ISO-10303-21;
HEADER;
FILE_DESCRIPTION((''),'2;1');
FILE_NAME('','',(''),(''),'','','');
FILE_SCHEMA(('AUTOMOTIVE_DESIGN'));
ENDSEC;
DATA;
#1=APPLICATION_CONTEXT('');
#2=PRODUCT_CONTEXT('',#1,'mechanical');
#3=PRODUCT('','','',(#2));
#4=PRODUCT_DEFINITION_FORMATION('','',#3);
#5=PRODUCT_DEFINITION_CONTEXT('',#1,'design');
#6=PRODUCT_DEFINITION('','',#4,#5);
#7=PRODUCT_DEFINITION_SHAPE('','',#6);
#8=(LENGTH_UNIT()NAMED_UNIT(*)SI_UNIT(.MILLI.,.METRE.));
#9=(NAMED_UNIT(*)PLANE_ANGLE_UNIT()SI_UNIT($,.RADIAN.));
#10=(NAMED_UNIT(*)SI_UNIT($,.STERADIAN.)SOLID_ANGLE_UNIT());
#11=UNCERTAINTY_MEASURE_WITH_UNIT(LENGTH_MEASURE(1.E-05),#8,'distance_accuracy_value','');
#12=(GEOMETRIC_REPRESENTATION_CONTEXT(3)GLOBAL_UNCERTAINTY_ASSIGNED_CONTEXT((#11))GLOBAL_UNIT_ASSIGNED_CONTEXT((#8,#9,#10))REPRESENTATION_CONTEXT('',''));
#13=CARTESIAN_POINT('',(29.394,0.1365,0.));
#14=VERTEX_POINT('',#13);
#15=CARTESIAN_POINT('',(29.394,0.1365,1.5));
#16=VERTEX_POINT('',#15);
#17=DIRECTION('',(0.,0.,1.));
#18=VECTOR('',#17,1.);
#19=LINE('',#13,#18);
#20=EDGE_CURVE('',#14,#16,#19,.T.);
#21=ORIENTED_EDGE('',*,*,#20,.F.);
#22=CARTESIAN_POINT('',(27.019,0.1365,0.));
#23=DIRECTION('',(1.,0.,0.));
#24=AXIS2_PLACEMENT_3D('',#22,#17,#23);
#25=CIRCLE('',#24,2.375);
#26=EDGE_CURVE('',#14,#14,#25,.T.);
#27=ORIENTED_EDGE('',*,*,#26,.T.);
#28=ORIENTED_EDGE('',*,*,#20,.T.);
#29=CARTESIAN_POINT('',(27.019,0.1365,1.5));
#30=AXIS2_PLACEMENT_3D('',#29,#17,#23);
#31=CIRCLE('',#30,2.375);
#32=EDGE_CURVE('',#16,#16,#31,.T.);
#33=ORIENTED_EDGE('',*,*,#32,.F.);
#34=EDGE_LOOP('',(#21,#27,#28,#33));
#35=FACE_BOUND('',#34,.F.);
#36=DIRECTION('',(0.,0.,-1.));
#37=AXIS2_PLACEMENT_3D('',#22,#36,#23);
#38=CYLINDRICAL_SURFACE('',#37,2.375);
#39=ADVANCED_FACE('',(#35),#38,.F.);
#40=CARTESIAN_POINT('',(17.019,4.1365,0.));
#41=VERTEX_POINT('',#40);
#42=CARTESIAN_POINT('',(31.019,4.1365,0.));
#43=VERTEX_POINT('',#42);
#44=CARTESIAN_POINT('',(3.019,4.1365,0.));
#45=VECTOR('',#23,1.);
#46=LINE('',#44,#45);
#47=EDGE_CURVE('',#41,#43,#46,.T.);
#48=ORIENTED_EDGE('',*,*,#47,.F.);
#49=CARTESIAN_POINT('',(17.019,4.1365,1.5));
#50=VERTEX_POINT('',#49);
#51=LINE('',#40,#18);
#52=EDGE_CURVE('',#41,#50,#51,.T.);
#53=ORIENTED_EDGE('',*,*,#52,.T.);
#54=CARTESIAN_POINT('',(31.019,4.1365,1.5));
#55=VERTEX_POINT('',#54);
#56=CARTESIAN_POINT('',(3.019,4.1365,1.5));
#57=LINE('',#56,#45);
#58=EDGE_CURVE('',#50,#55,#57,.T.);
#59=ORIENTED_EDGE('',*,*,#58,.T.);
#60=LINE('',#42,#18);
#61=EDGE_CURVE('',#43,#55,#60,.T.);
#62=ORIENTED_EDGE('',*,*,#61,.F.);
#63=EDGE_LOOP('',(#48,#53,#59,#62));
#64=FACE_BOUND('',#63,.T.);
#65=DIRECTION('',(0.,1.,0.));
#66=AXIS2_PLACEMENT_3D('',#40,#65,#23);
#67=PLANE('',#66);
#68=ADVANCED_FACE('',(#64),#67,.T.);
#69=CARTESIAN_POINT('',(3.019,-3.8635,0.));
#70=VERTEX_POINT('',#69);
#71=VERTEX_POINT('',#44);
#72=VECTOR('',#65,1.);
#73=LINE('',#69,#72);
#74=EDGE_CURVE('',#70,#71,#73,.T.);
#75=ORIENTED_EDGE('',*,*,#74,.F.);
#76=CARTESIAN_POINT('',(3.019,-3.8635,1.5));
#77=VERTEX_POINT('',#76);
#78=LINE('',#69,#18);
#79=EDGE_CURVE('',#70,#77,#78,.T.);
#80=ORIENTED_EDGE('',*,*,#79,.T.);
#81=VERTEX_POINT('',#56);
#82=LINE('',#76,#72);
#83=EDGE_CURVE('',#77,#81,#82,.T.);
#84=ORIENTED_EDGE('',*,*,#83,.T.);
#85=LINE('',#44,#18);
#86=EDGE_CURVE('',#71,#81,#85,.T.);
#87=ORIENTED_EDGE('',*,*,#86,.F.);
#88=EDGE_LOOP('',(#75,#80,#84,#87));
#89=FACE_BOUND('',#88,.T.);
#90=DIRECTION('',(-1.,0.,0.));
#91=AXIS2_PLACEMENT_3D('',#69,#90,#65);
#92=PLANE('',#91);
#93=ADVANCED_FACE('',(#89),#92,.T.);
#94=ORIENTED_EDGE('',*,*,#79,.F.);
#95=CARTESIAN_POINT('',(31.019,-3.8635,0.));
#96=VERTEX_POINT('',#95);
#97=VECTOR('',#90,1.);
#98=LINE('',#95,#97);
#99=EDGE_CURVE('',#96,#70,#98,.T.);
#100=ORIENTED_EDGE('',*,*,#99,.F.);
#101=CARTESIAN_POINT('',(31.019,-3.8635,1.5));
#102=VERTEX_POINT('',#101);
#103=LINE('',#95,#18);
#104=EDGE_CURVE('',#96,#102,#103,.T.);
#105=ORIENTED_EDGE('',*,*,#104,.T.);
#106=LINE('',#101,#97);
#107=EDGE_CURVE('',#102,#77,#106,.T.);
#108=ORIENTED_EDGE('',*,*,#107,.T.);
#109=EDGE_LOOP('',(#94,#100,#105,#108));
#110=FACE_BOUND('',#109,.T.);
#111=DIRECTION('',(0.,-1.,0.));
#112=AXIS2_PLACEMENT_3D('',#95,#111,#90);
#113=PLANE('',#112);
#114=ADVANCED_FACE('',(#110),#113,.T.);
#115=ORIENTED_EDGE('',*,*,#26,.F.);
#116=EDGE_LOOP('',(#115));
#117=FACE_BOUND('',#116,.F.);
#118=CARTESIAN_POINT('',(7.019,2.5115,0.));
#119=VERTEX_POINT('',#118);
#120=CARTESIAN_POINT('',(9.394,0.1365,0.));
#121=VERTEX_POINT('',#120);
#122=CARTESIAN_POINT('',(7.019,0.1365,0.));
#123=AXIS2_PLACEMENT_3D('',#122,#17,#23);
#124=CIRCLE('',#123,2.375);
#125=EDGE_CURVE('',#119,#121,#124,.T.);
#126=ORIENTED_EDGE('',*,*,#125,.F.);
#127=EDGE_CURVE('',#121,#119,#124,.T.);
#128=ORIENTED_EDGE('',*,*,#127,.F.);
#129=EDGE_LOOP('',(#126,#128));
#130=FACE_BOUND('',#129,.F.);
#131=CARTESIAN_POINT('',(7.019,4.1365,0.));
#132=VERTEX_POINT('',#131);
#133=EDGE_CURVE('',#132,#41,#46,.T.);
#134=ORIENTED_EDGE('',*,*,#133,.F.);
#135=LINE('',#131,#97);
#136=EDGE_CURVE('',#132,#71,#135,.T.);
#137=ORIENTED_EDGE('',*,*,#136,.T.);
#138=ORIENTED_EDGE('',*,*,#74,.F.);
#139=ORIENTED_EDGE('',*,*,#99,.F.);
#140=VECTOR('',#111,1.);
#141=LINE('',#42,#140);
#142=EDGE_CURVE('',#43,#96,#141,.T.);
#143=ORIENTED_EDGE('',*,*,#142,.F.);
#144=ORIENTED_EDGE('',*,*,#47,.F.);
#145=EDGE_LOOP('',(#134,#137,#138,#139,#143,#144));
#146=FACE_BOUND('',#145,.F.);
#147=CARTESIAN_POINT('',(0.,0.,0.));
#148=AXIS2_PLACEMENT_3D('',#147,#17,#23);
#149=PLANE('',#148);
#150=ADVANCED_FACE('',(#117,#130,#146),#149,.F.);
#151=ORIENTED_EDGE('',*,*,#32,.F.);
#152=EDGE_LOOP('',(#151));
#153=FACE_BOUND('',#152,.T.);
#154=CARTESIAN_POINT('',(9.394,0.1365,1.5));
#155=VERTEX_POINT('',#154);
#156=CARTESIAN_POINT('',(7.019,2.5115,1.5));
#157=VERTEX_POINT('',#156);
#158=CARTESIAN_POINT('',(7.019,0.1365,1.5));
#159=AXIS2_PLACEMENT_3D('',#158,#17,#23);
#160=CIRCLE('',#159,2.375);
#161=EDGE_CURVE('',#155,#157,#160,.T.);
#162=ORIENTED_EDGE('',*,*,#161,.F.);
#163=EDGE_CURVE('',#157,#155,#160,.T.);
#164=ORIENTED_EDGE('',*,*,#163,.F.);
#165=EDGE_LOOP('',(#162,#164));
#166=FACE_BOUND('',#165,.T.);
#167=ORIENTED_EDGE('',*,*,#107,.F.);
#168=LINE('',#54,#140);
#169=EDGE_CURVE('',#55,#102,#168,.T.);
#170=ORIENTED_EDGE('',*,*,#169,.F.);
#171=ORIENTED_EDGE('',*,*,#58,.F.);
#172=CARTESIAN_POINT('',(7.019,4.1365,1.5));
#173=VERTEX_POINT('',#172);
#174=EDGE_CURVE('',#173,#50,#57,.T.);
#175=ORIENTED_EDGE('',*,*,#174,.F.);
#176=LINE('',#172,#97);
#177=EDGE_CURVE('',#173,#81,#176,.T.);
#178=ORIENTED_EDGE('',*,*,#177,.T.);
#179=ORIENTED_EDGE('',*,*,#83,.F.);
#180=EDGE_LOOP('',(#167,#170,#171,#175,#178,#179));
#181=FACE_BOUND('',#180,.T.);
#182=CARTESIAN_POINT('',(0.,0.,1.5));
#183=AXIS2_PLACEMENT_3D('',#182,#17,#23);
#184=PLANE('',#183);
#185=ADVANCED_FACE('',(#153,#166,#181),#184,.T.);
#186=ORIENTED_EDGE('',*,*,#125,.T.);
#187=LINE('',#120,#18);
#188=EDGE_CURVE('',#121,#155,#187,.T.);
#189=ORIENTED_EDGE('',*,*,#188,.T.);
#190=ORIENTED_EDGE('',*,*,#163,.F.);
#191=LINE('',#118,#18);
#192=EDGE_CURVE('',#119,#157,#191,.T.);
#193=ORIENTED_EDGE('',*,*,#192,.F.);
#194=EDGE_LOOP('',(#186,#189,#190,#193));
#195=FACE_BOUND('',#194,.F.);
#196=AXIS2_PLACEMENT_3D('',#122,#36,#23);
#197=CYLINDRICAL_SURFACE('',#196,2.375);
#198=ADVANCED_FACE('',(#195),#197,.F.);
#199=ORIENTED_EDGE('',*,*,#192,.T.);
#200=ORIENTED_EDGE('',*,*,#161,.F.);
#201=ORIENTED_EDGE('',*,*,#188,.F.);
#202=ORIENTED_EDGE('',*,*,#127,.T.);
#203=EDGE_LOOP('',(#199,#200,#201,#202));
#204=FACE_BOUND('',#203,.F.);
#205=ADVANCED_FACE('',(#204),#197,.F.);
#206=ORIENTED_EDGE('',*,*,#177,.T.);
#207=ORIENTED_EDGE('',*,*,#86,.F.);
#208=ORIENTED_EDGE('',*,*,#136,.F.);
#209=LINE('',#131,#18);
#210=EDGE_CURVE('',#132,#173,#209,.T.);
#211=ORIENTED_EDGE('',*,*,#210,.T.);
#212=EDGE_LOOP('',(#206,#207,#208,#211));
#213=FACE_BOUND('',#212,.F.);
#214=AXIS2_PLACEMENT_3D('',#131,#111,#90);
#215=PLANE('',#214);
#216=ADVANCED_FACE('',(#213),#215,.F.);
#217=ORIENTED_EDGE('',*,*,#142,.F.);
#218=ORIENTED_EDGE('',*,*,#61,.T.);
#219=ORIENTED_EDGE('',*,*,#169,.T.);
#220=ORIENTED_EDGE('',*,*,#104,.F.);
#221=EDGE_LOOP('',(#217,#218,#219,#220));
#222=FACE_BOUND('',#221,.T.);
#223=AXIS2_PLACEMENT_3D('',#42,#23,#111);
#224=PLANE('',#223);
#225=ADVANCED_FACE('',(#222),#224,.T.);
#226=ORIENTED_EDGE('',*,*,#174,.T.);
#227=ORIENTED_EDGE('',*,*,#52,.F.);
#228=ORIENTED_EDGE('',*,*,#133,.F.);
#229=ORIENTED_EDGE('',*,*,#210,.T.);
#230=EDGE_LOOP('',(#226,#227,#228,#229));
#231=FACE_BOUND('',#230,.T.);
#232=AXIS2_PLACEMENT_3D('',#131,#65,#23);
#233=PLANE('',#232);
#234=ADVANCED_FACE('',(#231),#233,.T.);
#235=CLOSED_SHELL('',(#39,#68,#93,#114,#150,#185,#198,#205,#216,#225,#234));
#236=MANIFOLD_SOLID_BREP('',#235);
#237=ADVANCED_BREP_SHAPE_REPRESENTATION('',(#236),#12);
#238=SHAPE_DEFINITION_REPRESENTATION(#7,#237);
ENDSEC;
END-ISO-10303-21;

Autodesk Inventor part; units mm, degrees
ref_plane "YZ Plane" through (0, 0, 0) normal (1, 0, 0) x (0, 1, 0)
ref_plane "XZ Plane" through (0, 0, 0) normal (0, 1, 0) x (-1, 0, 0)
ref_plane "XY Plane" through (0, 0, 0) normal (0, 0, 1) x (1, 0, 0)
sketch "Sketch2" plane through (0, 0, 0) normal (0, 0, 1) x (1, 0, 0)
  circle A0 centre (7.019, 0.1365) radius 2.125 projected
  circle A1 centre (7.019, 0.1365) radius 2.375
  line L0 (7.019, 0.1365) -> (7.019, 4.1365)
  line L1 (7.019, 4.1365) -> (3.019, 4.1365)
  line L2 (3.019, 4.1365) -> (31.019, 4.1365)
  line L3 (31.019, 4.1365) -> (31.019, -3.8635)
  line L4 (31.019, -3.8635) -> (3.019, -3.8635)
  line L5 (3.019, -3.8635) -> (3.019, 4.1365)
  line L6 (17.019, 4.1365) -> (17.019, 2)
  circle A2 centre (27.019, 0.1365) radius 2.375
  point P0 (0, 0)
  dimension "d0" = 4.75
  dimension "d1" = 4
  dimension "d2" = 4
  dimension "d3" = 28
  dimension "d4" = 8
extrude "Extrusion1" add sketch "Sketch2" along normal blind 1.5 contours L2 L3 L4 L5 L1
properties part number "Connector"
